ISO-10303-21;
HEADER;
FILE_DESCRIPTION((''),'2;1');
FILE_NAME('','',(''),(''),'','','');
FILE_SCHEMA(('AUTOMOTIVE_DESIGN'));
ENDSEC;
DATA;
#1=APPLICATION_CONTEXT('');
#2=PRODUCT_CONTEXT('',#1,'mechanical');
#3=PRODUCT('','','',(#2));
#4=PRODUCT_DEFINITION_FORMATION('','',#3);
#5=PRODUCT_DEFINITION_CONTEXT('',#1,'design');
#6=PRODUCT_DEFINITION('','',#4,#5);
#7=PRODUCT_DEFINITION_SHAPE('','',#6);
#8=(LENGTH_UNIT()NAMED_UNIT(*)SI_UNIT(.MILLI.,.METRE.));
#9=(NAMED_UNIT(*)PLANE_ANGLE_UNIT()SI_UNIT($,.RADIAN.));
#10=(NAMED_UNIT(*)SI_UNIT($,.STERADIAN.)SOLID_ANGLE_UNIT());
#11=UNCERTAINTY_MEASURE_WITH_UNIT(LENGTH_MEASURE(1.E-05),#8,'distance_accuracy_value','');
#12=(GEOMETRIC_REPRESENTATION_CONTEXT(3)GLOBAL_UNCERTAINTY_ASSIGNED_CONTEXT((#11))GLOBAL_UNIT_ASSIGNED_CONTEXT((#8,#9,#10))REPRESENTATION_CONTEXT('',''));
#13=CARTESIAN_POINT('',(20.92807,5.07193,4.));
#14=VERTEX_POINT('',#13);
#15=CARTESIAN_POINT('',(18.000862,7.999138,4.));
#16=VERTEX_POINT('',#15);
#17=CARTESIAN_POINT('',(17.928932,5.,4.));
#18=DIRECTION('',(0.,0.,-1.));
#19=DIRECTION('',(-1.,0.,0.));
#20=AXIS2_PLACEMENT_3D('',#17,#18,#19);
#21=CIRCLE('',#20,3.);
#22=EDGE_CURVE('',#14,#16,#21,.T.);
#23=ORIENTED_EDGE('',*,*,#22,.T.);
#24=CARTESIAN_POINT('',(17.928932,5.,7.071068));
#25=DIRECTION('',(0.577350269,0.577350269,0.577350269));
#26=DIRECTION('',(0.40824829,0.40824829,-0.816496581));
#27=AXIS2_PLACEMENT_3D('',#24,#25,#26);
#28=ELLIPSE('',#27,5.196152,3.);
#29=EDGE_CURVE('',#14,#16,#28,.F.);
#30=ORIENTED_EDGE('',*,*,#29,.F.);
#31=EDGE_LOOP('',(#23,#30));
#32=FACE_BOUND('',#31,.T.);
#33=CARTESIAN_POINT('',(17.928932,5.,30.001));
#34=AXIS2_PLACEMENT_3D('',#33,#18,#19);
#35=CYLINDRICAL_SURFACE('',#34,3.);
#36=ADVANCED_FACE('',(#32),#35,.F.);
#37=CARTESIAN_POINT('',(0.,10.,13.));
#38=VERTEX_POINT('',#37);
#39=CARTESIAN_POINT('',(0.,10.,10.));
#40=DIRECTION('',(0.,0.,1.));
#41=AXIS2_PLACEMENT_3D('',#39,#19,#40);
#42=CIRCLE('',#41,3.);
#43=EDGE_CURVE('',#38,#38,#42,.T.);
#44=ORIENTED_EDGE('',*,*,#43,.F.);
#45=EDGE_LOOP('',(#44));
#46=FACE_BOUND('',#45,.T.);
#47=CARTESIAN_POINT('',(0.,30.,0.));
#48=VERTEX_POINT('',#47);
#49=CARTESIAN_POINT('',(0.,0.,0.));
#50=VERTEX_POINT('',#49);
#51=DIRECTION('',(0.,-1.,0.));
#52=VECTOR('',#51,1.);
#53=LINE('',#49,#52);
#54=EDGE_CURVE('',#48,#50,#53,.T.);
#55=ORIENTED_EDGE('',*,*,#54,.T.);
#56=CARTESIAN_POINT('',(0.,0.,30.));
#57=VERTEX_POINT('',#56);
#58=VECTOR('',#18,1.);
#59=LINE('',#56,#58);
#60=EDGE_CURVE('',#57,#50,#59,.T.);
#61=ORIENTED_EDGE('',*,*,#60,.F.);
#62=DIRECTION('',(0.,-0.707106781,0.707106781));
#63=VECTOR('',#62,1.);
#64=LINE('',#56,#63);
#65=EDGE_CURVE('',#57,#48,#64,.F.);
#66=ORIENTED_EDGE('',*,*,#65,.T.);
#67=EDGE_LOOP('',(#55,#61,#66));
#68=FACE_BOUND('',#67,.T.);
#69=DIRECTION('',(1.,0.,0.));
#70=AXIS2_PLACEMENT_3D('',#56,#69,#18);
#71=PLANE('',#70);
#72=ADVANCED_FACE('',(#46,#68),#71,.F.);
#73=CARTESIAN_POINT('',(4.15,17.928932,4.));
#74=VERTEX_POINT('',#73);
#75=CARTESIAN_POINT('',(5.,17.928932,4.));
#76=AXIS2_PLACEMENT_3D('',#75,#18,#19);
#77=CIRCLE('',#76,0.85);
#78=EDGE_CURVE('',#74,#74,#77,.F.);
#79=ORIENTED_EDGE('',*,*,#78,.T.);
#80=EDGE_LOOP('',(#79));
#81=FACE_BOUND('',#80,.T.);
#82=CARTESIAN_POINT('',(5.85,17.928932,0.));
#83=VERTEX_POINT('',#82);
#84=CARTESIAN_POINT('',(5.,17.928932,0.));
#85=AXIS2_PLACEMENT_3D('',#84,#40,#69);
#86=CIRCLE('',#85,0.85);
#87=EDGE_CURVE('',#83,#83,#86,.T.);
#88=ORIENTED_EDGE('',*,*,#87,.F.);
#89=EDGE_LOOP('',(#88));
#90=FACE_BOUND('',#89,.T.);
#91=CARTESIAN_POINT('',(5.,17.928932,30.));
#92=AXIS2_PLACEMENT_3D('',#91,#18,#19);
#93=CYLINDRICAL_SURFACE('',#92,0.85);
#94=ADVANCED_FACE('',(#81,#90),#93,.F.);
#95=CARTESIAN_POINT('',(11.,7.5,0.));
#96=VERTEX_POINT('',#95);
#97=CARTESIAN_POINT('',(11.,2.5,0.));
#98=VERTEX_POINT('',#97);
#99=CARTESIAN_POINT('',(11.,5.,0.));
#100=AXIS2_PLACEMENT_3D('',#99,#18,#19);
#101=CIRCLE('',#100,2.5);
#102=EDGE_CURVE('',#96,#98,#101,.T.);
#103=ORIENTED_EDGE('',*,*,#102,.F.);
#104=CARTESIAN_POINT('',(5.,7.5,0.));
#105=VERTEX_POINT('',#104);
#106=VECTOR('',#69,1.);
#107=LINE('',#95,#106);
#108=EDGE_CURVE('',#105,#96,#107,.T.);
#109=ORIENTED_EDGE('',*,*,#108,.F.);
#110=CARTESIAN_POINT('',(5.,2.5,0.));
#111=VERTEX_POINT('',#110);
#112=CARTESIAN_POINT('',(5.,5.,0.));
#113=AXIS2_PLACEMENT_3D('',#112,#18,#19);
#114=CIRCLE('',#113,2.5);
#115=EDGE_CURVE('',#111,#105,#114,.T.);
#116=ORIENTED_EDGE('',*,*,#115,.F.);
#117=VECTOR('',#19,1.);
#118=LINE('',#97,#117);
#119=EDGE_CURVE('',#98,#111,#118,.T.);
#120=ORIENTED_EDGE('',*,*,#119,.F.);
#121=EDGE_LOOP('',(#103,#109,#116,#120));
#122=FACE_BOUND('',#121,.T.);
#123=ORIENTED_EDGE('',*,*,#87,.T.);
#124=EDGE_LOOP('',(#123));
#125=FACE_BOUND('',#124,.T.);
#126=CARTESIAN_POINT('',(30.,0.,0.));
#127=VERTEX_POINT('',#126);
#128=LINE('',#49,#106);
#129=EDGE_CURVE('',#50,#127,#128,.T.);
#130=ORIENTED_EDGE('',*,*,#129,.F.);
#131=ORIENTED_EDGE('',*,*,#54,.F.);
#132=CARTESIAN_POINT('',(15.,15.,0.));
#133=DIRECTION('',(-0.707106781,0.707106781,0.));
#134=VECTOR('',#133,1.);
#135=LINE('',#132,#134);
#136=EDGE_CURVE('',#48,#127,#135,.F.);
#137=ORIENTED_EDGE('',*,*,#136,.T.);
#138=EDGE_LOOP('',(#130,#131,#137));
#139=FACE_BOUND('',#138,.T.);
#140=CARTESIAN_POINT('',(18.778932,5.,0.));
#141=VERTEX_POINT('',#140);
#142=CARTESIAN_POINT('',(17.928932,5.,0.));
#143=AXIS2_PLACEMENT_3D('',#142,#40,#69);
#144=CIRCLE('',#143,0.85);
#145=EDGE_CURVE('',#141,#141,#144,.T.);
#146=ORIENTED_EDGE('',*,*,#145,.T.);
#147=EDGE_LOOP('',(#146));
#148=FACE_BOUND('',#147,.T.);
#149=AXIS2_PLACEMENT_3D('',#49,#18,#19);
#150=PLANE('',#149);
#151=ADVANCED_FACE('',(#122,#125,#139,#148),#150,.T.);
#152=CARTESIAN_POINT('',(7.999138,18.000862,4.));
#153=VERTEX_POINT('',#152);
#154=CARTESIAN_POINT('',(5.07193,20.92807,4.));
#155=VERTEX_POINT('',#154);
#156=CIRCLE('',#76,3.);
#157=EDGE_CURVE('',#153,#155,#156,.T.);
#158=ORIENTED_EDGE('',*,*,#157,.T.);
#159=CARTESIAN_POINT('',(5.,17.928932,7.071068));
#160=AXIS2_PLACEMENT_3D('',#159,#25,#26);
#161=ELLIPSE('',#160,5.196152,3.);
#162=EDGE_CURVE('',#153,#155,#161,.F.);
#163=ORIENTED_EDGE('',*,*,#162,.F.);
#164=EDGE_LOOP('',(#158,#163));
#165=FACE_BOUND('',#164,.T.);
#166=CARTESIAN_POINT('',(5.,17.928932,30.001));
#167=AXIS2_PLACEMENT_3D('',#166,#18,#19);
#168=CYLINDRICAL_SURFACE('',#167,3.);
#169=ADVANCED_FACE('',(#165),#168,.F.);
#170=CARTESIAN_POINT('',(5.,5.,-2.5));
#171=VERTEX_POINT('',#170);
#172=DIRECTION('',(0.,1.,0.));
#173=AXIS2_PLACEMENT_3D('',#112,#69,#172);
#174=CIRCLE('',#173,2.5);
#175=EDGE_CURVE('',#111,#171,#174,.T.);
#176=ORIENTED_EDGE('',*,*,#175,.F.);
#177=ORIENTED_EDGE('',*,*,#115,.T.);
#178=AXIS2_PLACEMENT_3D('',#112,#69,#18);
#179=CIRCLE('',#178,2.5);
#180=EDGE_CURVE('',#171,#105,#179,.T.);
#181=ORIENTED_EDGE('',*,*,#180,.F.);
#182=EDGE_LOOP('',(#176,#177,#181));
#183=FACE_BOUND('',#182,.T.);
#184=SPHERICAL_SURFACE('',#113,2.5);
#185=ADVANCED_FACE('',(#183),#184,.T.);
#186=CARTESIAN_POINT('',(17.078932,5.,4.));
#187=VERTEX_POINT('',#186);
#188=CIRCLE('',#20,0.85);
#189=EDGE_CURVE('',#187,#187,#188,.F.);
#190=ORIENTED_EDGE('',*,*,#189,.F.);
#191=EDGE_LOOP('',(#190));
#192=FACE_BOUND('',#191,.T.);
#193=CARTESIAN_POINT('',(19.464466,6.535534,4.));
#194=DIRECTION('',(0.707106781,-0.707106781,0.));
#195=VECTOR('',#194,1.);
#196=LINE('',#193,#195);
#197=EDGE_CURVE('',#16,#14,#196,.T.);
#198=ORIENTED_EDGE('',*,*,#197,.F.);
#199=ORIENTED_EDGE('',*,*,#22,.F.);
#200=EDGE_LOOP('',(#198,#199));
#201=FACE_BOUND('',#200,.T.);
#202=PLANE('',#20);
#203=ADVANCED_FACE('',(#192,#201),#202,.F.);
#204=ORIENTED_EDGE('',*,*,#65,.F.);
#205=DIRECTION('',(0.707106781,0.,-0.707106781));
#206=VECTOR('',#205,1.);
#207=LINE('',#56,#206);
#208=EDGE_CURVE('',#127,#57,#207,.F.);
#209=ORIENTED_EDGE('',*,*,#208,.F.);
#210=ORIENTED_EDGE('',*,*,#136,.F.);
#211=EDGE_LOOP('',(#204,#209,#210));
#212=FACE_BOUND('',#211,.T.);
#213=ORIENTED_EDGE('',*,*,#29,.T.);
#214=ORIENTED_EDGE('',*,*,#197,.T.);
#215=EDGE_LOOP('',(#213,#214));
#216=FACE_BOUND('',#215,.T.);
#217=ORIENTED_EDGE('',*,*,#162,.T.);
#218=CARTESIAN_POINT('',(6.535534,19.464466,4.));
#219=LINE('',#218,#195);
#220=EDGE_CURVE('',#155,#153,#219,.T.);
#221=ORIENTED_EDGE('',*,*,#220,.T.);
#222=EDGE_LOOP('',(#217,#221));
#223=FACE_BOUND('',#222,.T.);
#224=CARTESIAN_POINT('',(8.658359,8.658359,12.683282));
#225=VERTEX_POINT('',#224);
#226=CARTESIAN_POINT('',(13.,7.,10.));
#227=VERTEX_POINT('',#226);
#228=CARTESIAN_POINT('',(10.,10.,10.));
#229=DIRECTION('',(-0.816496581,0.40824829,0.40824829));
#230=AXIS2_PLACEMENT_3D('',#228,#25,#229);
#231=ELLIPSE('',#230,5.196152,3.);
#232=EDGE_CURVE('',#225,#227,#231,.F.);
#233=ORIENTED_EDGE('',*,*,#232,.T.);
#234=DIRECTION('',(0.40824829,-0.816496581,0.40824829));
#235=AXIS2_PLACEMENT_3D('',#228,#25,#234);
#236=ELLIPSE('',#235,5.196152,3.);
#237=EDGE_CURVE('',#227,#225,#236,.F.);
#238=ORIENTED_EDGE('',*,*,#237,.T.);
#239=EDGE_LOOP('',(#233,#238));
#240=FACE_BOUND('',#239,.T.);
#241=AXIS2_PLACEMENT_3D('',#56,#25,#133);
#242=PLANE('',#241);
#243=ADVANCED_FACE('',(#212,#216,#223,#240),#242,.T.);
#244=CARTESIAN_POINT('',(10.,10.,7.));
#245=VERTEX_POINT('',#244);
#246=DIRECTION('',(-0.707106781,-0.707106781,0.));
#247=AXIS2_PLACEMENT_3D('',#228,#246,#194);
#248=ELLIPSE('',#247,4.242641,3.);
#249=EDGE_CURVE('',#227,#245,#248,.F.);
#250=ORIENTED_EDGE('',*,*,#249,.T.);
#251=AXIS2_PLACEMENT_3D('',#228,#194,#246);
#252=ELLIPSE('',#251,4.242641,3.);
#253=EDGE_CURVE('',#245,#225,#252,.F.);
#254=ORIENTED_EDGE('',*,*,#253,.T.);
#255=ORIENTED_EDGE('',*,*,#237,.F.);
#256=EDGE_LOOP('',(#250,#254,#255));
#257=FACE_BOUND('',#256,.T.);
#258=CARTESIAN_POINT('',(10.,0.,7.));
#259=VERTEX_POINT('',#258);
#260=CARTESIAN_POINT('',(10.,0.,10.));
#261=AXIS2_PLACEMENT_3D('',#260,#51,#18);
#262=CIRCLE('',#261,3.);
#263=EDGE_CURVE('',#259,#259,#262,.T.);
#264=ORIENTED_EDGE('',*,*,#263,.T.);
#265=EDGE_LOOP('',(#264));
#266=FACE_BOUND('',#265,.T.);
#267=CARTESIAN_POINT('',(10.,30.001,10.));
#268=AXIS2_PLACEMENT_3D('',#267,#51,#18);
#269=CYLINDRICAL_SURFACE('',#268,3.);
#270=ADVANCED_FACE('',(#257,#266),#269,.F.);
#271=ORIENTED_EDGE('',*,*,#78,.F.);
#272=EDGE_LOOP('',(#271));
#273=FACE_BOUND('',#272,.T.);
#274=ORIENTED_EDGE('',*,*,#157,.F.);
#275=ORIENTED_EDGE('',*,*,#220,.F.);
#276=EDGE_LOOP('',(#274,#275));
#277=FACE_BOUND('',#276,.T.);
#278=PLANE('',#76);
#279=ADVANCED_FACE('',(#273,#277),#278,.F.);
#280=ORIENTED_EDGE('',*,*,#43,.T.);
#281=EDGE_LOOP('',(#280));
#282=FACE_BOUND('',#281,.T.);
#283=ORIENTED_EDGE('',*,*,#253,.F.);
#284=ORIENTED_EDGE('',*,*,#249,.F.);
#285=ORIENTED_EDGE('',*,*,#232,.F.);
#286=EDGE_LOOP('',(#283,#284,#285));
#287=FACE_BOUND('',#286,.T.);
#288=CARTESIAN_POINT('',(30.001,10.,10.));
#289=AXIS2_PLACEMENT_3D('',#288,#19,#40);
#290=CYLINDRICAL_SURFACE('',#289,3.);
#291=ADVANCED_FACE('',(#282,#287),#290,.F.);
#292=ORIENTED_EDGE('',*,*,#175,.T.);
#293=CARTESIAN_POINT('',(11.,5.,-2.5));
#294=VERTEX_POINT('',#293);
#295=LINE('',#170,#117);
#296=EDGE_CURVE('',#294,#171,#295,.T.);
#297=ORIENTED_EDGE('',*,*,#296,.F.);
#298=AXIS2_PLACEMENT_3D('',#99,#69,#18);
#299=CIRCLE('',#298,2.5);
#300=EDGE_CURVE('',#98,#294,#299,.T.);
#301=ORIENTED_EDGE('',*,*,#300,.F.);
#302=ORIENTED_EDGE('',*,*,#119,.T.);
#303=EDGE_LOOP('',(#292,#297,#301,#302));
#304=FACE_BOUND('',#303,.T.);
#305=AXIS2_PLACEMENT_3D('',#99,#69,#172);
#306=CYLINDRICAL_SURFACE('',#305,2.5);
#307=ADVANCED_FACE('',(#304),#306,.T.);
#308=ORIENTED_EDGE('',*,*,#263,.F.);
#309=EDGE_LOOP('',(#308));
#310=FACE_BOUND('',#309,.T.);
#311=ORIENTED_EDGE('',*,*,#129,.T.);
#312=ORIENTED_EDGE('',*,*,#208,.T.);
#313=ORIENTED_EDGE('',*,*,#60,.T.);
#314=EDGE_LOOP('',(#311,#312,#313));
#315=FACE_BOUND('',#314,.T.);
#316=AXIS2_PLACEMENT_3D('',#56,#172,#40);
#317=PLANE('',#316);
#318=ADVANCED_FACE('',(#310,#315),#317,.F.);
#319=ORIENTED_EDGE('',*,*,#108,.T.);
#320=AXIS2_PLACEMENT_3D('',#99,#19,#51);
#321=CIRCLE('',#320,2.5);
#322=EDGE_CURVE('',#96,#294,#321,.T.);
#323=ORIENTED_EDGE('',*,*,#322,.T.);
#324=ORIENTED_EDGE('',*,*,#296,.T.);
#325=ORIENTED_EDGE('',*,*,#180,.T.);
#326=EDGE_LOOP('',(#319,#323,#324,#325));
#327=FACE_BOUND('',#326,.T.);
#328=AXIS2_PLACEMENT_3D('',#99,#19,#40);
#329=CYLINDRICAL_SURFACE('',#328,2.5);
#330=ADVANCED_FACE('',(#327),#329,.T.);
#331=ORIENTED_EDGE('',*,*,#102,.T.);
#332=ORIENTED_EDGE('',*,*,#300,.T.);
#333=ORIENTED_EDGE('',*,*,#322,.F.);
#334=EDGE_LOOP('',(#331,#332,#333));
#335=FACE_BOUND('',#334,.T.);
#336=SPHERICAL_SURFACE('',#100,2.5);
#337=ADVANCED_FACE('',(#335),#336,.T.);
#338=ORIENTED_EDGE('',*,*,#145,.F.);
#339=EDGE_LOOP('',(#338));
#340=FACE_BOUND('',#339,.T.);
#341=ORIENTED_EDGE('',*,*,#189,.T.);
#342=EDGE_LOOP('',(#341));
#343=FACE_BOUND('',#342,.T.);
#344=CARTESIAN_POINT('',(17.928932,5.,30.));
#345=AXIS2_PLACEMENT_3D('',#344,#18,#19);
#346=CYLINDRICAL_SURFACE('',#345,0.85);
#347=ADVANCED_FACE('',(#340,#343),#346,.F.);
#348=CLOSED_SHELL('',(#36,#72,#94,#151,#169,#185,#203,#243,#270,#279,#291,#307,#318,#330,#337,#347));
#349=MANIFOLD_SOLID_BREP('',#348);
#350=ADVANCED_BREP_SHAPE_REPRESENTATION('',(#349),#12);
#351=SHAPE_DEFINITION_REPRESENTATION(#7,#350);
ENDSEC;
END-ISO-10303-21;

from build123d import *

# Parameters (mm, degrees)
CROQUIS1_W              = 30
CROQUIS1_H              = 30
CROQUIS1_R              = 0.85
SALIENTE_EXTRUIR1_DEPTH = 30
CHAFL_N1_START          = 17.320508076
CHAFL_N1_OUTLINE_W      = 52
CHAFL_N1_OUTLINE_H      = 46
CHAFL_N1_DEPTH          = 35.679491924
CORTAR_EXTRUIR1_REACH   = 51.759
CROQUIS2_R              = 3
CORTAR_EXTRUIR2_REACH   = 53.962
CROQUIS3_R              = 3
SALIENTE_EXTRUIR2_DEPTH = 2.5
REDONDEO1_R             = 2.5
CORTAR_EXTRUIR3_REACH   = 53.962
CROQUIS5_R              = 3


with BuildPart() as part:
    # Croquis1 → Saliente-Extruir1 (new body)
    with BuildSketch(Plane.XY):
        with Locations((15, 15)):
            Rectangle(CROQUIS1_W, CROQUIS1_H)
        with Locations((5, 17.928932188)):
            Circle(CROQUIS1_R, mode=Mode.SUBTRACT)
        with Locations((17.928932188, 5)):
            Circle(CROQUIS1_R, mode=Mode.SUBTRACT)
    extrude(amount=SALIENTE_EXTRUIR1_DEPTH)

    # Chaflán1: read off the stored shape, not the designer's step
    # Chaflán1 outline → Chaflán1 (cut)
    with BuildSketch(Plane(origin=(0, 0, 0), x_dir=(0.8164965809277258, -0.4082482904638636, -0.40824829046386285), z_dir=(0.5773502691896261, 0.5773502691896261, 0.5773502691896251)).offset(CHAFL_N1_START)):
        Rectangle(CHAFL_N1_OUTLINE_W, CHAFL_N1_OUTLINE_H)
    extrude(amount=CHAFL_N1_DEPTH, mode=Mode.SUBTRACT)

    # Croquis2 → Cortar-Extruir1 (cut, up to next)
    with BuildSketch(Plane(origin=(0, 0, 4), x_dir=(-1, 0, 0), z_dir=(0, 0, -1)), mode=Mode.PRIVATE) as cortar_extruir1_sk1:
        with Locations((-5, 17.928932188)):
            Circle(CROQUIS2_R)
    cortar_extruir1_tool1 = extrude(cortar_extruir1_sk1.sketch, amount=-CORTAR_EXTRUIR1_REACH, mode=Mode.PRIVATE) & part.part
    # Croquis2 → Cortar-Extruir1 (cut, up to next)
    with BuildSketch(Plane(origin=(0, 0, 4), x_dir=(-1, 0, 0), z_dir=(0, 0, -1)), mode=Mode.PRIVATE) as cortar_extruir1_sk2:
        with Locations((-17.928932188, 5)):
            Circle(CROQUIS2_R)
    cortar_extruir1_tool2 = extrude(cortar_extruir1_sk2.sketch, amount=-CORTAR_EXTRUIR1_REACH, mode=Mode.PRIVATE) & part.part
    add(cortar_extruir1_tool1.solids().sort_by_distance((5, 17.928932, 4))[0], mode=Mode.SUBTRACT)
    add(cortar_extruir1_tool2.solids().sort_by_distance((17.928932, 5, 4))[0], mode=Mode.SUBTRACT)

    # Cortar-Extruir2: up to this plane
    cortar_extruir2_end = Plane(origin=(0, 0, 30), z_dir=(0.5773502691896264, 0.5773502691896264, 0.5773502691896246))
    # Croquis3 → Cortar-Extruir2 (cut, up to the surface)
    with BuildSketch(Plane.ZY, mode=Mode.PRIVATE) as cortar_extruir2_sk1:
        with Locations((10, 10)):
            Circle(CROQUIS3_R)
    cortar_extruir2_tool1 = split(extrude(cortar_extruir2_sk1.sketch, amount=-CORTAR_EXTRUIR2_REACH, mode=Mode.PRIVATE), bisect_by=cortar_extruir2_end, keep=Keep.BOTH, mode=Mode.PRIVATE)
    add(cortar_extruir2_tool1.solids().sort_by_distance((0, 10, 10))[0], mode=Mode.SUBTRACT)

    # Croquis4 → Saliente-Extruir2 (add)
    with BuildSketch(Plane(origin=(0, 0, 0), x_dir=(-1, 0, 0), z_dir=(0, 0, -1))):
        with BuildLine():
            Line((-11, 7.5), (-5, 7.5))
            ThreePointArc((-5, 7.5), (-2.5, 5), (-5, 2.5))
            Line((-5, 2.5), (-11, 2.5))
            ThreePointArc((-11, 2.5), (-13.5, 5), (-11, 7.5))
        make_face()
    extrude(amount=SALIENTE_EXTRUIR2_DEPTH)

    # Redondeo1
    redondeo1_edges = [part.edges().sort_by_distance(p)[0] for p in [
        (8, 7.5, -2.5),
        (2.5, 5, -2.5),
        (8, 2.5, -2.5),
        (13.5, 5, -2.5),
    ]]
    fillet(redondeo1_edges, radius=REDONDEO1_R - 0.0001)  # a hair under: the kernel refuses the full size

    # Croquis5 → Cortar-Extruir3 (cut, up to next)
    with BuildSketch(Plane.XZ, mode=Mode.PRIVATE) as cortar_extruir3_sk1:
        with Locations(Location((10, 10, 0), (0, 0, 270))):
            Circle(CROQUIS5_R)
    cortar_extruir3_tool1 = extrude(cortar_extruir3_sk1.sketch, amount=-CORTAR_EXTRUIR3_REACH, mode=Mode.PRIVATE) & part.part
    add(cortar_extruir3_tool1.solids().sort_by_distance((10, 0, 10))[0], mode=Mode.SUBTRACT)


solid = part.part
